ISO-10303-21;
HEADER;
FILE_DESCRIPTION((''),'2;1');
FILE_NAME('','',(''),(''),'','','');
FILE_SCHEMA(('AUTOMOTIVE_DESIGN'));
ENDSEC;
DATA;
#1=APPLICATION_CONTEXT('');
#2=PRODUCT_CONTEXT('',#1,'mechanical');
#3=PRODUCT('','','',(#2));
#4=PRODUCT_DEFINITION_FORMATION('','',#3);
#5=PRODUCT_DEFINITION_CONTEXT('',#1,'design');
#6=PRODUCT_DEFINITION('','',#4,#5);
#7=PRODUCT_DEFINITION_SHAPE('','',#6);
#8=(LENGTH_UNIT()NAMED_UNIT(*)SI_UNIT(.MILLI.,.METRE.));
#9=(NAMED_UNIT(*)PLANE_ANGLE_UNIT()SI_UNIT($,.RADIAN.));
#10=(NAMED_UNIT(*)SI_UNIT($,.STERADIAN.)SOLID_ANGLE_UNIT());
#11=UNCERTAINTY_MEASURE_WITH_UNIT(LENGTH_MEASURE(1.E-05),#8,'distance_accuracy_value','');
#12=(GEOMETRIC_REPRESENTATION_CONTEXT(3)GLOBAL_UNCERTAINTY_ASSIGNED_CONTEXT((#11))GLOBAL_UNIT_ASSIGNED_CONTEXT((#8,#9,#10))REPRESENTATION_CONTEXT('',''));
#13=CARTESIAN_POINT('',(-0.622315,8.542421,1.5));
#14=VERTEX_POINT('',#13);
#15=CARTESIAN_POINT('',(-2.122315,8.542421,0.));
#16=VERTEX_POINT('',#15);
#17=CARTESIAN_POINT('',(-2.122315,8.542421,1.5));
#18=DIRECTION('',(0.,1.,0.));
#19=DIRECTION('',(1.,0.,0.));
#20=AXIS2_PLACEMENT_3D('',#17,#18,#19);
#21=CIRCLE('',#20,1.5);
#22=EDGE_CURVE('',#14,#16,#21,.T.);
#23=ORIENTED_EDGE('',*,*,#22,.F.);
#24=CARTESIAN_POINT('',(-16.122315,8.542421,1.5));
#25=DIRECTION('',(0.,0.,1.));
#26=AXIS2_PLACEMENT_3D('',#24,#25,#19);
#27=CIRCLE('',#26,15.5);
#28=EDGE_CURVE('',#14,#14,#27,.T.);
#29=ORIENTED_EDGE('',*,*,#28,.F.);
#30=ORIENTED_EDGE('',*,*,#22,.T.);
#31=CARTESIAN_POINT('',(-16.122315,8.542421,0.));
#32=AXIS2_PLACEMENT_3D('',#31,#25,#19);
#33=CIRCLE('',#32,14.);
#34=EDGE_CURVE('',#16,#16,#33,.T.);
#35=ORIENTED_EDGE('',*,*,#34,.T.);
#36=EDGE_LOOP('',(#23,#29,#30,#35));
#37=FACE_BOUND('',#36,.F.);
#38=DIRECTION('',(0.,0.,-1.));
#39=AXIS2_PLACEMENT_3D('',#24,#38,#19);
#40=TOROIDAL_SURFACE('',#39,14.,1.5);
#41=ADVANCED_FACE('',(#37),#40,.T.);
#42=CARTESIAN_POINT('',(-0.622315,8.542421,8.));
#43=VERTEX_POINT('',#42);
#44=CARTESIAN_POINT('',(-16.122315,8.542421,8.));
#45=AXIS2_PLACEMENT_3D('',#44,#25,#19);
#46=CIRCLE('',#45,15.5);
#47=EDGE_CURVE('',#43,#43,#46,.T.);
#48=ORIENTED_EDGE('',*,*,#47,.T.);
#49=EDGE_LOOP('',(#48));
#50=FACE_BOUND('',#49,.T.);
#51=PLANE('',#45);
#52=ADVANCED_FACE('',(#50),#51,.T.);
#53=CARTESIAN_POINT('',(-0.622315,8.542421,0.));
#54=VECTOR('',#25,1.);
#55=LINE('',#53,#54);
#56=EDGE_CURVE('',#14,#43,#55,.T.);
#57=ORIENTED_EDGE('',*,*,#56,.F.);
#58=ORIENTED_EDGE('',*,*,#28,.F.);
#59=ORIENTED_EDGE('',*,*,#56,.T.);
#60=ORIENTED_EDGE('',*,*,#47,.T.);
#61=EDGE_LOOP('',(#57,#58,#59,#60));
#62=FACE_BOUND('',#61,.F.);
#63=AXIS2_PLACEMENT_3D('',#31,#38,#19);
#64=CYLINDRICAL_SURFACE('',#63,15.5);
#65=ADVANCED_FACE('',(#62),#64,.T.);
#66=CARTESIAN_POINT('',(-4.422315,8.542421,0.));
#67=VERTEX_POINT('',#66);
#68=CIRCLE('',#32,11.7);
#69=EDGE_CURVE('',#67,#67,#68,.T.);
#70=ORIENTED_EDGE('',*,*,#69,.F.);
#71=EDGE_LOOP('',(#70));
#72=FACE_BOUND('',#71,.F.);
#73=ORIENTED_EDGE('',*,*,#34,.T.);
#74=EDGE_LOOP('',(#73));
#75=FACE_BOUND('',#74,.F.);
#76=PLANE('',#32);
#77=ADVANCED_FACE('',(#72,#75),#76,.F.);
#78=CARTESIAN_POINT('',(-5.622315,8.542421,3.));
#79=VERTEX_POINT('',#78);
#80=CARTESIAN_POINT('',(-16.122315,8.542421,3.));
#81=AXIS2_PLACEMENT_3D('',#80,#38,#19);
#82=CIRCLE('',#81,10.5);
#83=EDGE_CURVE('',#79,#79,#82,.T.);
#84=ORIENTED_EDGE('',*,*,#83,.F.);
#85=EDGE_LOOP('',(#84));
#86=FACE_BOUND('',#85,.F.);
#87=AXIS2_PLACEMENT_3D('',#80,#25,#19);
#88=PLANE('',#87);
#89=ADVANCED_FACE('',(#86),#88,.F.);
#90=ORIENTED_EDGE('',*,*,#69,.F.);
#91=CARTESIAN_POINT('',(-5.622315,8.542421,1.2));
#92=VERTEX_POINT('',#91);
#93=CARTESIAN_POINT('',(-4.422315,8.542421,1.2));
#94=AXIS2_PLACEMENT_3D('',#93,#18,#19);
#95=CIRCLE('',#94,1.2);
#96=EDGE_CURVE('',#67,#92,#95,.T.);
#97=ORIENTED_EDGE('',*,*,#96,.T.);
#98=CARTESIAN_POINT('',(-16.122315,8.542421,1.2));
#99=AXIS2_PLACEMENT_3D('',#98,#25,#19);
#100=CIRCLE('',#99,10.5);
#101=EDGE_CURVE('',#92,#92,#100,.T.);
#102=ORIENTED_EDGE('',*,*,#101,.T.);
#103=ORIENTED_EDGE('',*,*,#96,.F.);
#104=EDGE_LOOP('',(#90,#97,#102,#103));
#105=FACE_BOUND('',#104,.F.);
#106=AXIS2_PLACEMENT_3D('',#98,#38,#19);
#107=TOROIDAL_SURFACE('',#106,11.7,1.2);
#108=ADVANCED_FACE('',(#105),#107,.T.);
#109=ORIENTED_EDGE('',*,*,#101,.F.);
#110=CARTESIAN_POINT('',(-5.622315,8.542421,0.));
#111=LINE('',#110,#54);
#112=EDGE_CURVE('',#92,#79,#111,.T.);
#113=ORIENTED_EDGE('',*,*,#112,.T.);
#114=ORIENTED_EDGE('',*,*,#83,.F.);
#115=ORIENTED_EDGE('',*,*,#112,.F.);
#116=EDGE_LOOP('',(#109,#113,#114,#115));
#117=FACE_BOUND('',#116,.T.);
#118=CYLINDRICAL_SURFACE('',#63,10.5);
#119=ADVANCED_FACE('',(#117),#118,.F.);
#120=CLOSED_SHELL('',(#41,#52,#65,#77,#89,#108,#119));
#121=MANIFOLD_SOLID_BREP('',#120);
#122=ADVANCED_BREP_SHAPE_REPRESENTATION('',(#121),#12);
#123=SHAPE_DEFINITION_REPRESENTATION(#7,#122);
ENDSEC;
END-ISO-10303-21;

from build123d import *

# Parameters (mm, degrees)
F0_R     = 15.5
F1_DEPTH = 8
F2_T     = -5
F3_R     = 1.5
F4_R     = 1.2


with BuildPart() as f1:
    # F0 (on Top) → F1 (new body)
    with BuildSketch(Plane.XY):
        with Locations((-16.122315079, 8.5424212739)):
            Circle(F0_R)
    extrude(amount=F1_DEPTH)

    # F2
    f2_openings = [f1.faces().sort_by_distance(p)[0] for p in [
        (-16.122315, 8.542421, 0),
    ]]
    offset(amount=F2_T, openings=f2_openings)

    # F3
    f3_edges = [f1.edges().sort_by_distance(p)[0] for p in [
        (-31.622315, 8.542421, 0),
    ]]
    fillet(f3_edges, radius=F3_R)

    # F4
    f4_edges = [f1.edges().sort_by_distance(p)[0] for p in [
        (-26.622315, 8.542421, 0),
        (-1.061655, 8.542421, 0.43934),
        (-31.622315, 8.542421, 1.5),
        (-30.122315, 8.542421, 0),
    ]]
    fillet(f4_edges, radius=F4_R)


solid = f1.part
